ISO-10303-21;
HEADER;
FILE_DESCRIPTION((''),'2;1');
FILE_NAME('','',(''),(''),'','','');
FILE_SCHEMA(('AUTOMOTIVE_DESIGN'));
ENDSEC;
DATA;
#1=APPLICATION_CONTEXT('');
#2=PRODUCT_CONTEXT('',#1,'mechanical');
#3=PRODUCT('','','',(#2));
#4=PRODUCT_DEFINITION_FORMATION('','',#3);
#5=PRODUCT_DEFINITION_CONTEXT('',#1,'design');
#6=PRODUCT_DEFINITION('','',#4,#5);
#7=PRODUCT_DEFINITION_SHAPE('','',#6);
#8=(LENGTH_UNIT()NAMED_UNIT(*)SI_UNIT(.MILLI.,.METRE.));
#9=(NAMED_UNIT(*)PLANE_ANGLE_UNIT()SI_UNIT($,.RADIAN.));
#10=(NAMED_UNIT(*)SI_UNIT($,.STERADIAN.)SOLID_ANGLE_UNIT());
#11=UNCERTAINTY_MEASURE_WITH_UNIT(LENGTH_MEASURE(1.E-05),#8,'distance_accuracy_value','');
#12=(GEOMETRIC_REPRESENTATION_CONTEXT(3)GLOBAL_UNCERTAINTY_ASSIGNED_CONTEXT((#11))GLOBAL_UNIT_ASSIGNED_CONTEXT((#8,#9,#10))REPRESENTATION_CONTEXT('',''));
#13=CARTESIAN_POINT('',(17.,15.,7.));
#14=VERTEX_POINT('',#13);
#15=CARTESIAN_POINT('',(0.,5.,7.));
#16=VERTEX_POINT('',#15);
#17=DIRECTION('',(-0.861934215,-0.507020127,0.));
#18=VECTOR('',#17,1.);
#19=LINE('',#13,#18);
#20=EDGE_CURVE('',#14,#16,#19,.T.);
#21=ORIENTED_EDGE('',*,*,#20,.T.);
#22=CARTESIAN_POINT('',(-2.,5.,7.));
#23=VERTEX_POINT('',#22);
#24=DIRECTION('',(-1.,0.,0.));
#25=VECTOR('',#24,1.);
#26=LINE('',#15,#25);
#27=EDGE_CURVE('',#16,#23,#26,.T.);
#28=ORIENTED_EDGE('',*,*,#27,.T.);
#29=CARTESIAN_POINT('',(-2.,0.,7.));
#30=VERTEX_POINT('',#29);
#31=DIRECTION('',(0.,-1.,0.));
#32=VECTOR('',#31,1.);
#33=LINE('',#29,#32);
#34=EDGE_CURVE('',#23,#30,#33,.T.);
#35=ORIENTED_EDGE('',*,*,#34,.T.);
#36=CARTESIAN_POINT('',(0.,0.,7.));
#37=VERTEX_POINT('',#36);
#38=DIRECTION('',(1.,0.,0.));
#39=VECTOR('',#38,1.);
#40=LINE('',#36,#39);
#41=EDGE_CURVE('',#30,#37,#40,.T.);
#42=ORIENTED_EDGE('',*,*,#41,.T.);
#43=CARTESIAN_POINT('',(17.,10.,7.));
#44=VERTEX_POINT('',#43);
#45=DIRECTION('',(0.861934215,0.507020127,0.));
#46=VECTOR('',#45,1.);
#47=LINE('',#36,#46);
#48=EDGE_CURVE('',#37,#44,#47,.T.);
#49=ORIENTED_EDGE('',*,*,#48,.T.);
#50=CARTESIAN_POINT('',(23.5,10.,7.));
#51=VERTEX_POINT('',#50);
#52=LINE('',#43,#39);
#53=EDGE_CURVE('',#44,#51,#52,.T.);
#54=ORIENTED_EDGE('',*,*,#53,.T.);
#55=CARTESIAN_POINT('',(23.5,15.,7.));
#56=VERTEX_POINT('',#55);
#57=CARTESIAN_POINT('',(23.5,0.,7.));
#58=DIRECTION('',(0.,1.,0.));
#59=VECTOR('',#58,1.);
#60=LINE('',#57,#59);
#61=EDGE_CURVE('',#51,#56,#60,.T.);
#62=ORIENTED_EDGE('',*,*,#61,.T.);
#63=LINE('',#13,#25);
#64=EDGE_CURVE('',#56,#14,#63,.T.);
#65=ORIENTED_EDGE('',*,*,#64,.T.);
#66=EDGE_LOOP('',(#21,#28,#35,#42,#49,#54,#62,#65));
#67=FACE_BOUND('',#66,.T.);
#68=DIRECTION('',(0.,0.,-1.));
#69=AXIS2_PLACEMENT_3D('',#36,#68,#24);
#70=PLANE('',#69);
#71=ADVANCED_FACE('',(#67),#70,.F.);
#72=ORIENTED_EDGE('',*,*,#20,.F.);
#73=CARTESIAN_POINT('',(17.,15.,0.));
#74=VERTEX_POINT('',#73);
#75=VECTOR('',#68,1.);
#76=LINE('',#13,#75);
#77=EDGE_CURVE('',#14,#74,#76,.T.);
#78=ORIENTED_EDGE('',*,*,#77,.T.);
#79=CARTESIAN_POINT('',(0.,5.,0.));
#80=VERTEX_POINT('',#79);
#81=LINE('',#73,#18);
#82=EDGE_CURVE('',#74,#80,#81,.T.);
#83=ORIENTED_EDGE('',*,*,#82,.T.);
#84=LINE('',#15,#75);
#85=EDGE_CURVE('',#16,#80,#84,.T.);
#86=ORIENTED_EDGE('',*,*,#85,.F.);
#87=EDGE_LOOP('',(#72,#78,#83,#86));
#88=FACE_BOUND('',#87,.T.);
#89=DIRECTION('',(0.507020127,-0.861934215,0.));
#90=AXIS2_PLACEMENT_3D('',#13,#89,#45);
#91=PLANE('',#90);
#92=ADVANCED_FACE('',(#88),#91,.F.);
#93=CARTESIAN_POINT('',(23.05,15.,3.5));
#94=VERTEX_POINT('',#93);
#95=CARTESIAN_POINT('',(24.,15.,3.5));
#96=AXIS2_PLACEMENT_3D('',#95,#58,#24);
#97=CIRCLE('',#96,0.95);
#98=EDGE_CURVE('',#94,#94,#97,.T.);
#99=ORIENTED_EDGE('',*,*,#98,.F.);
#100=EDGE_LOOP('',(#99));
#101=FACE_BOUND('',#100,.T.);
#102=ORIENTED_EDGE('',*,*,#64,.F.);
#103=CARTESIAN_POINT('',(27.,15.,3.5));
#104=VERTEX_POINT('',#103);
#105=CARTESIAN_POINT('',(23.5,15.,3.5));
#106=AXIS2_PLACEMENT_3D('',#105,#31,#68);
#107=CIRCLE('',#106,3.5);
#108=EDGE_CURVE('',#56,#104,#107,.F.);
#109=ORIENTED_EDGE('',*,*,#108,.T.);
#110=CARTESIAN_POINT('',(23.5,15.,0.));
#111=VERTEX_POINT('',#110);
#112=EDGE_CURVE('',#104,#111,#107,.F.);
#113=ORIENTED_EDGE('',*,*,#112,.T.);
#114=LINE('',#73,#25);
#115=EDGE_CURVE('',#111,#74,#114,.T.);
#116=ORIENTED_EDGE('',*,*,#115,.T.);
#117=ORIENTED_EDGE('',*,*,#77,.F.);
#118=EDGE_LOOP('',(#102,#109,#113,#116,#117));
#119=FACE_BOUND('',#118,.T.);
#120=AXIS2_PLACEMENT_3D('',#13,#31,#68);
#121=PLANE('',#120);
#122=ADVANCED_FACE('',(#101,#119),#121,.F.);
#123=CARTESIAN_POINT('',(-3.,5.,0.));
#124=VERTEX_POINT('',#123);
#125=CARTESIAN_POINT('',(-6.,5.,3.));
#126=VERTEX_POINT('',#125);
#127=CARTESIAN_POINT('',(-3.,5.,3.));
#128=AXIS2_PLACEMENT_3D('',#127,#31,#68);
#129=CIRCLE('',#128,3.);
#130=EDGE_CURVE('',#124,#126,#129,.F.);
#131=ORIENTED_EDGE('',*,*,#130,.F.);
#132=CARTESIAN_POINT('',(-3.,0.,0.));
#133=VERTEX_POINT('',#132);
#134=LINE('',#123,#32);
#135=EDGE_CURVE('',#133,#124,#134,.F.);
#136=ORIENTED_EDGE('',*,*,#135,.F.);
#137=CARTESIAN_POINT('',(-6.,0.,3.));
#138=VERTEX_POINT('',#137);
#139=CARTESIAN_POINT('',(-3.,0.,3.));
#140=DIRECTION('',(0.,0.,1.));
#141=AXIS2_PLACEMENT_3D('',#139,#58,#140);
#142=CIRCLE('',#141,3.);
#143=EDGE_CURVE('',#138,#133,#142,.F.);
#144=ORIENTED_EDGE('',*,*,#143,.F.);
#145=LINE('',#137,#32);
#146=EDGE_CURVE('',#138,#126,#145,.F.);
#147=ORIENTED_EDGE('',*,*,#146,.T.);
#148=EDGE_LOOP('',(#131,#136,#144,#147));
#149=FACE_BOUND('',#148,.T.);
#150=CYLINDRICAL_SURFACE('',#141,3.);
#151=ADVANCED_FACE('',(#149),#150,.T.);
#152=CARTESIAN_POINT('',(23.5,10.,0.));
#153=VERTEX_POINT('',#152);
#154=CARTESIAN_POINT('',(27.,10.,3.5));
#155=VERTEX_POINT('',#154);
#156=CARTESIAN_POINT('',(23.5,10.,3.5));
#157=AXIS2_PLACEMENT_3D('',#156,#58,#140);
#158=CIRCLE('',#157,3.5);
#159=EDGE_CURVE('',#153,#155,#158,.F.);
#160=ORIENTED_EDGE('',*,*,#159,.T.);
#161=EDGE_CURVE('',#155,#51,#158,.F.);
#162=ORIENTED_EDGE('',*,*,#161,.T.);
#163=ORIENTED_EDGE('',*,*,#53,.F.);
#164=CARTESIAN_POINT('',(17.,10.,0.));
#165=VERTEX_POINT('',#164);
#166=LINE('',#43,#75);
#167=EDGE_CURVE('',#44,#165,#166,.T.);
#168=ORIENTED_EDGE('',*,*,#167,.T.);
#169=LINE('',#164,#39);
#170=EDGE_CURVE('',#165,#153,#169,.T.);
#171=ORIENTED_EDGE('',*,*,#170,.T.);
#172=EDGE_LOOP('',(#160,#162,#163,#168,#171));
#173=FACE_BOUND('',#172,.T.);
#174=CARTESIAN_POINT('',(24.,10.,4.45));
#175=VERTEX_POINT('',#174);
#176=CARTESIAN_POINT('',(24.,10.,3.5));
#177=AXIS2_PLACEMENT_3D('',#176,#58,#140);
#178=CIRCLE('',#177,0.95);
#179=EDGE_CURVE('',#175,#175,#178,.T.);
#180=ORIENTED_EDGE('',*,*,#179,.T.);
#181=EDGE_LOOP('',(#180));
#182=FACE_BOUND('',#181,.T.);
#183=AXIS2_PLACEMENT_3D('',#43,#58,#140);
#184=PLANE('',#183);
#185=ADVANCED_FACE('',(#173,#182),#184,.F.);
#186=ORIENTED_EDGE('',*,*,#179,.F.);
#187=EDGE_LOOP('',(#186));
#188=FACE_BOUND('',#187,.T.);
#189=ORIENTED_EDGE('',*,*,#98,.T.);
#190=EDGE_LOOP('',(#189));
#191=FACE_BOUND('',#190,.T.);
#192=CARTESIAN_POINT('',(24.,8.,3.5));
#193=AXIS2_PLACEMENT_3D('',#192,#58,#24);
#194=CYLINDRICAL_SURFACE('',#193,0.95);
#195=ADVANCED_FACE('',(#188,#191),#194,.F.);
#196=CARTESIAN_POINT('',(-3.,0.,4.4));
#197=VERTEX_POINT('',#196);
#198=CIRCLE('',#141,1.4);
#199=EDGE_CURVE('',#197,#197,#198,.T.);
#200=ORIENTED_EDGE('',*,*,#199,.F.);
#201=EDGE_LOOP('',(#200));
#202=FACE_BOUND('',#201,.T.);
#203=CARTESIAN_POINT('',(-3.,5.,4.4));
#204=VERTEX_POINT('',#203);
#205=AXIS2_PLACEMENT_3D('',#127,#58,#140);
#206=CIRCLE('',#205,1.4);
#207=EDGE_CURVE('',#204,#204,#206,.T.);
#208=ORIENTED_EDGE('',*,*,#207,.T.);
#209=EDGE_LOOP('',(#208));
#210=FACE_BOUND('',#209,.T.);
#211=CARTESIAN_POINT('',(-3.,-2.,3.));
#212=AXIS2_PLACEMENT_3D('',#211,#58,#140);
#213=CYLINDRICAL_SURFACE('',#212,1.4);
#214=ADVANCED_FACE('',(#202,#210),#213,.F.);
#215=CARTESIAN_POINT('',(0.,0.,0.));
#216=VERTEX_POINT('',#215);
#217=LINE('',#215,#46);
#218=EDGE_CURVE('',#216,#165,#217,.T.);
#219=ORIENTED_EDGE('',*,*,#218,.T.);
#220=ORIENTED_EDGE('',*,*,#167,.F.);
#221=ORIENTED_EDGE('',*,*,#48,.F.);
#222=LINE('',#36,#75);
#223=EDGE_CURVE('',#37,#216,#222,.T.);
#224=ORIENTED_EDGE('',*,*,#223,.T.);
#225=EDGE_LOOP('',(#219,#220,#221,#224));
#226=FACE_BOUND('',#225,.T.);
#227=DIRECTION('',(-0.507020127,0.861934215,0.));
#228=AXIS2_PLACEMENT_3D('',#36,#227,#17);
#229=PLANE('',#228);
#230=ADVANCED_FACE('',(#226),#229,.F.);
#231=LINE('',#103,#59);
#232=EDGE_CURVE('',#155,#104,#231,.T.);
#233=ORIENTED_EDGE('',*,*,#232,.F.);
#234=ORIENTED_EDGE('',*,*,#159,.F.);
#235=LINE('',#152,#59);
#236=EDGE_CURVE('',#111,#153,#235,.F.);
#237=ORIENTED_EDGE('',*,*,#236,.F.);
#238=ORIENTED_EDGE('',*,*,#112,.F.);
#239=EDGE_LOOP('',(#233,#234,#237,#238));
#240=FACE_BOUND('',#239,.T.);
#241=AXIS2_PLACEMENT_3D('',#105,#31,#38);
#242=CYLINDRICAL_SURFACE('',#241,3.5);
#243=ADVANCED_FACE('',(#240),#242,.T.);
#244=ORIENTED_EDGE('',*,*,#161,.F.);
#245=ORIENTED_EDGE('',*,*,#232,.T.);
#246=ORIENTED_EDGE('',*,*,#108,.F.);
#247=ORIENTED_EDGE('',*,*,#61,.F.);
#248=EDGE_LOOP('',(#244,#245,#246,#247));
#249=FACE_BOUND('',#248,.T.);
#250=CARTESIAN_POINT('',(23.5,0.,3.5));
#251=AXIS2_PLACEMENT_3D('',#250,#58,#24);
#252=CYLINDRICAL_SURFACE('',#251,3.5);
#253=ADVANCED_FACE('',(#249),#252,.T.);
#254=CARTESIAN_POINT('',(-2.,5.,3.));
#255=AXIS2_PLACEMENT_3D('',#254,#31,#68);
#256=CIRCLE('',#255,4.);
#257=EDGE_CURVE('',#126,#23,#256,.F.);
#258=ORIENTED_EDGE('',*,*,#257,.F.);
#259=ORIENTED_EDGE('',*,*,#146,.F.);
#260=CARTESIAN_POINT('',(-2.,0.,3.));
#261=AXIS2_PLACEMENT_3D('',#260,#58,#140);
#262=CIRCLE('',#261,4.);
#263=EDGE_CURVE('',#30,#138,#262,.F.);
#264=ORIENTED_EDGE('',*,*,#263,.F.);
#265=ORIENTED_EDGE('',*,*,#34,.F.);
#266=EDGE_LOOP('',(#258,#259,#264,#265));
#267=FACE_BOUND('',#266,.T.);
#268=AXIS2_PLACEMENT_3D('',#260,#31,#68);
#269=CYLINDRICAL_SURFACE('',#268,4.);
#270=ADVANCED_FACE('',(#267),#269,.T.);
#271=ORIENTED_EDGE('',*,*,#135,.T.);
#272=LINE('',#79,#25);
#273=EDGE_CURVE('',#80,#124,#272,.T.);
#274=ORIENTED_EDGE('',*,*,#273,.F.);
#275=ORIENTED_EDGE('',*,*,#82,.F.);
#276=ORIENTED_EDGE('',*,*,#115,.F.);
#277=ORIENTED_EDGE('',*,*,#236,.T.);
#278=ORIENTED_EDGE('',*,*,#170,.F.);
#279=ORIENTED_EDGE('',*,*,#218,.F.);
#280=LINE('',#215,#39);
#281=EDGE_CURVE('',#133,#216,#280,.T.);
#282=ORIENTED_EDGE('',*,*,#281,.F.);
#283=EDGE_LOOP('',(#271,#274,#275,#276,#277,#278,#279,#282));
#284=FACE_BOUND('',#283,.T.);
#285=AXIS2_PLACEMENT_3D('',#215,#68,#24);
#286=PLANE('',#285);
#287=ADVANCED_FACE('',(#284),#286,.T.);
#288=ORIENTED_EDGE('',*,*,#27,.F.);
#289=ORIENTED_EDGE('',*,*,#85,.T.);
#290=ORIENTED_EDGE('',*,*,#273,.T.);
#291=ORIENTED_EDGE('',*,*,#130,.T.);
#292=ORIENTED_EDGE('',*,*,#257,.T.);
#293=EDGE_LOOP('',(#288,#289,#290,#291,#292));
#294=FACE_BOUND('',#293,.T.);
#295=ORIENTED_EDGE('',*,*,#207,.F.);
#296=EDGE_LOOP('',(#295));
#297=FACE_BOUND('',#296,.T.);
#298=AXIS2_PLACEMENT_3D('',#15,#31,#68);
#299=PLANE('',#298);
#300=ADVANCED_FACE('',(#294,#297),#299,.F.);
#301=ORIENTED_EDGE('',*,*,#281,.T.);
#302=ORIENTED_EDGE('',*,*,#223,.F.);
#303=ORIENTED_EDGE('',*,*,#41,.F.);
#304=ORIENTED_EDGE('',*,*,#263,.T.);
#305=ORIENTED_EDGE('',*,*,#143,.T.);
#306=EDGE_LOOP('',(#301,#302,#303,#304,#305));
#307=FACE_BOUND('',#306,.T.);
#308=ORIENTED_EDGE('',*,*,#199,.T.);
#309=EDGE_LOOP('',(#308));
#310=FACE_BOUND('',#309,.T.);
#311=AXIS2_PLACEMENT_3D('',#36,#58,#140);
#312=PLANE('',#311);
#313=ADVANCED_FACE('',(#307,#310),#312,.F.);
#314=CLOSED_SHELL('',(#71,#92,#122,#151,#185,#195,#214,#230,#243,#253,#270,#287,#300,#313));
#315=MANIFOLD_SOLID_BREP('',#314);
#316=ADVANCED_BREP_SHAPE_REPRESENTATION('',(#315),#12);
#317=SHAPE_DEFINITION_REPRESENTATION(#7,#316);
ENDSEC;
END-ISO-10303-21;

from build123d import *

# Parameters (mm, degrees)
BOSS_EXTRU_1_DEPTH      = 7
ESQUISSE3_R             = 1.4
ENL_V_MAT_EXTRU_1_DEPTH = 7
ESQUISSE4_R             = 0.95
ENL_V_MAT_EXTRU_2_DEPTH = 7
CONG_1_R                = 3.5
CONG_2_R                = 4
CONG_3_R                = 3


with BuildPart() as part:
    # Esquisse1 → Boss.-Extru.1 (new body)
    with BuildSketch(Plane.XY):
        Polygon((17, 15), (0, 5), (-6, 5), (-6, 0), (0, 0), (17, 10), (27, 10), (27, 15), align=None)
    extrude(amount=BOSS_EXTRU_1_DEPTH)

    # Esquisse3 → Enlèv. mat.-Extru.1 (cut)
    with BuildSketch(Plane(origin=(0, 5, 0), x_dir=(1, 0, 0), z_dir=(0, 1, 0))):
        with Locations(Location((-3, -3, 0), (0, 0, 270))):
            Circle(ESQUISSE3_R)
    extrude(amount=-ENL_V_MAT_EXTRU_1_DEPTH, mode=Mode.SUBTRACT)

    # Esquisse4 → Enlèv. mat.-Extru.2 (cut)
    with BuildSketch(Plane(origin=(0, 15, 0), x_dir=(1, 0, 0), z_dir=(0, 1, 0))):
        with Locations(Location((24, -3.5, 0), (0, 0, 180))):
            Circle(ESQUISSE4_R)
    extrude(amount=-ENL_V_MAT_EXTRU_2_DEPTH, mode=Mode.SUBTRACT)

    # Congé1
    cong_1_edges = [part.edges().sort_by_distance(p)[0] for p in [
        (27, 12.5, 7),
        (27, 12.5, 0),
    ]]
    fillet(cong_1_edges, radius=CONG_1_R - 0.0001)  # a hair under: the kernel refuses the full size

    # Congé2
    cong_2_edges = [part.edges().sort_by_distance(p)[0] for p in [
        (-6, 2.5, 7),
    ]]
    fillet(cong_2_edges, radius=CONG_2_R)

    # Congé3
    cong_3_edges = [part.edges().sort_by_distance(p)[0] for p in [
        (-6, 2.5, 0),
    ]]
    fillet(cong_3_edges, radius=CONG_3_R - 0.0001)  # a hair under: the kernel refuses the full size


solid = part.part
